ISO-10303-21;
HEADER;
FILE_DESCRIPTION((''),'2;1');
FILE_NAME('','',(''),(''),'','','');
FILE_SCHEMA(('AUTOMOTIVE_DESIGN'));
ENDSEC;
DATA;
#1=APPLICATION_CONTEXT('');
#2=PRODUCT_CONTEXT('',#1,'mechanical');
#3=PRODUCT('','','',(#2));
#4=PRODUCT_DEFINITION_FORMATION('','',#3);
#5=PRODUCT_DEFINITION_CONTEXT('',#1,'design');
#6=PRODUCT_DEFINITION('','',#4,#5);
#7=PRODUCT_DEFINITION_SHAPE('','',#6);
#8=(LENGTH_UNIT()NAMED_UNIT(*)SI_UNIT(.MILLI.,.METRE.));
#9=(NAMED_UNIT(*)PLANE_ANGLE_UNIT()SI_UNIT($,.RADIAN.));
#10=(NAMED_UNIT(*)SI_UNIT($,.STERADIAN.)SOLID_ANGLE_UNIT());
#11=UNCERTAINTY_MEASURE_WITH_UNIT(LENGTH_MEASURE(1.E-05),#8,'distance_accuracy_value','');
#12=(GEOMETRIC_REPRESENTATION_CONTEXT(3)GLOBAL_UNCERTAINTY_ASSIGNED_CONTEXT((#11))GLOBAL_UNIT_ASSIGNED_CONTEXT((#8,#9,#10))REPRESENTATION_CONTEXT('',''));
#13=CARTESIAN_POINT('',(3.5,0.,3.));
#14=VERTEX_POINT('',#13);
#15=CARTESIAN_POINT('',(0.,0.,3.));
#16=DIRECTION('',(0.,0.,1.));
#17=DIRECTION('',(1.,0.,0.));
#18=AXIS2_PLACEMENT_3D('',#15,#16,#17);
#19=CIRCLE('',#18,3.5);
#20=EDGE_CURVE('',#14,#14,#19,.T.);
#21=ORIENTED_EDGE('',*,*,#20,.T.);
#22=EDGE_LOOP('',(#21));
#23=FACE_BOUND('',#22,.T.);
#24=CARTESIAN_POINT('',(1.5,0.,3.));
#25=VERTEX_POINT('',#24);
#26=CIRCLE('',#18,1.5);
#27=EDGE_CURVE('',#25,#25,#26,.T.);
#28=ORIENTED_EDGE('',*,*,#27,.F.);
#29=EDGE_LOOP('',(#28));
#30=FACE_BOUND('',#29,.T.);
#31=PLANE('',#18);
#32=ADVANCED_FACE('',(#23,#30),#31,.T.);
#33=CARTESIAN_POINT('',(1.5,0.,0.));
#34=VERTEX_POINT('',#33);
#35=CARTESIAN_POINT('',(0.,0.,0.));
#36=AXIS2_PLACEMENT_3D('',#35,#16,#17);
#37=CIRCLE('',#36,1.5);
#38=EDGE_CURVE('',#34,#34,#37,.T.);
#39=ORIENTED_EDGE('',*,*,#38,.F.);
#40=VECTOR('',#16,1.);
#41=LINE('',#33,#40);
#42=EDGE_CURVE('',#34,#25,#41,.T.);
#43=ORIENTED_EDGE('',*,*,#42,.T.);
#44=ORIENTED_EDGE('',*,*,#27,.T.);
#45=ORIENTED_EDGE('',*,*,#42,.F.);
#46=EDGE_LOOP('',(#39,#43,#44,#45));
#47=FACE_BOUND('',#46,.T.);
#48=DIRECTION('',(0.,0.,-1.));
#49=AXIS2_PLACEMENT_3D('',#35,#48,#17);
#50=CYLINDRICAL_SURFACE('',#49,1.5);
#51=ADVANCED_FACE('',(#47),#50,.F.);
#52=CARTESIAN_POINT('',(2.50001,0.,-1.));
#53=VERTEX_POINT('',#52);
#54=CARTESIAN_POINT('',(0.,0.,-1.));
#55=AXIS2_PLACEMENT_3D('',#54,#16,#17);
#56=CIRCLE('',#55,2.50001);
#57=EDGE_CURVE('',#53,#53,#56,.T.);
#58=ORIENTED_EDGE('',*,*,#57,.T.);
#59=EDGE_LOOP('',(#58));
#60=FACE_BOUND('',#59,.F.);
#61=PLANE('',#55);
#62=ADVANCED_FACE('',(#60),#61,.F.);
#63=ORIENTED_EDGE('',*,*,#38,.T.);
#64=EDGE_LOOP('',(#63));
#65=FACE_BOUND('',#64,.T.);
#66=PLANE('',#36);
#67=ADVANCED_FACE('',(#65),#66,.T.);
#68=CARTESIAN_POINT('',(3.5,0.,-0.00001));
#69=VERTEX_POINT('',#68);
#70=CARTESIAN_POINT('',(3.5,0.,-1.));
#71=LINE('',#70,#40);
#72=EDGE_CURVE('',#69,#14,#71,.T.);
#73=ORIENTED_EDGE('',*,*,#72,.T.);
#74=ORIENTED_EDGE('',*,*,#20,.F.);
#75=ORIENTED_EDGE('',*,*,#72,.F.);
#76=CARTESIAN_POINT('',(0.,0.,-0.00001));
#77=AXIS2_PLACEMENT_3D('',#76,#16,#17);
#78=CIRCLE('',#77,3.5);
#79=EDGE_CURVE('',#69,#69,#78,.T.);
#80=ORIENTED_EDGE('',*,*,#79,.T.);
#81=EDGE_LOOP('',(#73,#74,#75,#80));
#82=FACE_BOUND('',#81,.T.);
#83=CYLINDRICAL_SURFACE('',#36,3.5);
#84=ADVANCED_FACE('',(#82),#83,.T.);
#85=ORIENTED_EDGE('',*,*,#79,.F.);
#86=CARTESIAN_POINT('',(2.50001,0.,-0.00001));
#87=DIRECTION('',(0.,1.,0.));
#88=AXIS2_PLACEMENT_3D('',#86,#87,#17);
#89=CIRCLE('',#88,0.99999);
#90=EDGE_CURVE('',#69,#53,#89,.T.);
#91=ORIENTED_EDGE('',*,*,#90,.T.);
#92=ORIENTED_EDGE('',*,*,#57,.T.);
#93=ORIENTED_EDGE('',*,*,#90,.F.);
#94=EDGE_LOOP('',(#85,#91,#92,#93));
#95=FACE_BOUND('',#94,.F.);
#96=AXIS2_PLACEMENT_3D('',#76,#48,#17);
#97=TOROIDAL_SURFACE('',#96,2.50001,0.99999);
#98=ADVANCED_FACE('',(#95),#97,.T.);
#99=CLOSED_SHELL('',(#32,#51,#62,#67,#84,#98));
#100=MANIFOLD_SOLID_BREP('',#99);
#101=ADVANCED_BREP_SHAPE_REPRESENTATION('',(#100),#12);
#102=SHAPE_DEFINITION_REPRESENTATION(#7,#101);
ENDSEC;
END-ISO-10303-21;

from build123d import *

# Parameters (mm, degrees)
F0_R     = 3.5
F0_R_2   = 1.5
F1_DEPTH = 3
F2_R     = 3.5
F3_DEPTH = 1
F4_R     = 0.99999


# Not quite as in the source:
# - a fillet or chamfer is up to 0.001 mm smaller than in the source, because OpenCascade refuses the exact size


with BuildPart() as f1:
    # F0 (on Top) → F1 (new body)
    with BuildSketch(Plane.XY):
        Circle(F0_R)
        Circle(F0_R_2, mode=Mode.SUBTRACT)
    extrude(amount=F1_DEPTH)

    # F2 (on Top) → F3 (join)
    with BuildSketch(Plane.XY):
        Circle(F2_R)
    extrude(amount=-F3_DEPTH)

    # F4 (radius 1 in the source; OpenCascade refuses exactly that, so slightly less here)
    f4_edges = [f1.edges().sort_by_distance(p)[0] for p in [
        (-3.5, 0, -1),
    ]]
    fillet(f4_edges, radius=F4_R)


solid = f1.part
